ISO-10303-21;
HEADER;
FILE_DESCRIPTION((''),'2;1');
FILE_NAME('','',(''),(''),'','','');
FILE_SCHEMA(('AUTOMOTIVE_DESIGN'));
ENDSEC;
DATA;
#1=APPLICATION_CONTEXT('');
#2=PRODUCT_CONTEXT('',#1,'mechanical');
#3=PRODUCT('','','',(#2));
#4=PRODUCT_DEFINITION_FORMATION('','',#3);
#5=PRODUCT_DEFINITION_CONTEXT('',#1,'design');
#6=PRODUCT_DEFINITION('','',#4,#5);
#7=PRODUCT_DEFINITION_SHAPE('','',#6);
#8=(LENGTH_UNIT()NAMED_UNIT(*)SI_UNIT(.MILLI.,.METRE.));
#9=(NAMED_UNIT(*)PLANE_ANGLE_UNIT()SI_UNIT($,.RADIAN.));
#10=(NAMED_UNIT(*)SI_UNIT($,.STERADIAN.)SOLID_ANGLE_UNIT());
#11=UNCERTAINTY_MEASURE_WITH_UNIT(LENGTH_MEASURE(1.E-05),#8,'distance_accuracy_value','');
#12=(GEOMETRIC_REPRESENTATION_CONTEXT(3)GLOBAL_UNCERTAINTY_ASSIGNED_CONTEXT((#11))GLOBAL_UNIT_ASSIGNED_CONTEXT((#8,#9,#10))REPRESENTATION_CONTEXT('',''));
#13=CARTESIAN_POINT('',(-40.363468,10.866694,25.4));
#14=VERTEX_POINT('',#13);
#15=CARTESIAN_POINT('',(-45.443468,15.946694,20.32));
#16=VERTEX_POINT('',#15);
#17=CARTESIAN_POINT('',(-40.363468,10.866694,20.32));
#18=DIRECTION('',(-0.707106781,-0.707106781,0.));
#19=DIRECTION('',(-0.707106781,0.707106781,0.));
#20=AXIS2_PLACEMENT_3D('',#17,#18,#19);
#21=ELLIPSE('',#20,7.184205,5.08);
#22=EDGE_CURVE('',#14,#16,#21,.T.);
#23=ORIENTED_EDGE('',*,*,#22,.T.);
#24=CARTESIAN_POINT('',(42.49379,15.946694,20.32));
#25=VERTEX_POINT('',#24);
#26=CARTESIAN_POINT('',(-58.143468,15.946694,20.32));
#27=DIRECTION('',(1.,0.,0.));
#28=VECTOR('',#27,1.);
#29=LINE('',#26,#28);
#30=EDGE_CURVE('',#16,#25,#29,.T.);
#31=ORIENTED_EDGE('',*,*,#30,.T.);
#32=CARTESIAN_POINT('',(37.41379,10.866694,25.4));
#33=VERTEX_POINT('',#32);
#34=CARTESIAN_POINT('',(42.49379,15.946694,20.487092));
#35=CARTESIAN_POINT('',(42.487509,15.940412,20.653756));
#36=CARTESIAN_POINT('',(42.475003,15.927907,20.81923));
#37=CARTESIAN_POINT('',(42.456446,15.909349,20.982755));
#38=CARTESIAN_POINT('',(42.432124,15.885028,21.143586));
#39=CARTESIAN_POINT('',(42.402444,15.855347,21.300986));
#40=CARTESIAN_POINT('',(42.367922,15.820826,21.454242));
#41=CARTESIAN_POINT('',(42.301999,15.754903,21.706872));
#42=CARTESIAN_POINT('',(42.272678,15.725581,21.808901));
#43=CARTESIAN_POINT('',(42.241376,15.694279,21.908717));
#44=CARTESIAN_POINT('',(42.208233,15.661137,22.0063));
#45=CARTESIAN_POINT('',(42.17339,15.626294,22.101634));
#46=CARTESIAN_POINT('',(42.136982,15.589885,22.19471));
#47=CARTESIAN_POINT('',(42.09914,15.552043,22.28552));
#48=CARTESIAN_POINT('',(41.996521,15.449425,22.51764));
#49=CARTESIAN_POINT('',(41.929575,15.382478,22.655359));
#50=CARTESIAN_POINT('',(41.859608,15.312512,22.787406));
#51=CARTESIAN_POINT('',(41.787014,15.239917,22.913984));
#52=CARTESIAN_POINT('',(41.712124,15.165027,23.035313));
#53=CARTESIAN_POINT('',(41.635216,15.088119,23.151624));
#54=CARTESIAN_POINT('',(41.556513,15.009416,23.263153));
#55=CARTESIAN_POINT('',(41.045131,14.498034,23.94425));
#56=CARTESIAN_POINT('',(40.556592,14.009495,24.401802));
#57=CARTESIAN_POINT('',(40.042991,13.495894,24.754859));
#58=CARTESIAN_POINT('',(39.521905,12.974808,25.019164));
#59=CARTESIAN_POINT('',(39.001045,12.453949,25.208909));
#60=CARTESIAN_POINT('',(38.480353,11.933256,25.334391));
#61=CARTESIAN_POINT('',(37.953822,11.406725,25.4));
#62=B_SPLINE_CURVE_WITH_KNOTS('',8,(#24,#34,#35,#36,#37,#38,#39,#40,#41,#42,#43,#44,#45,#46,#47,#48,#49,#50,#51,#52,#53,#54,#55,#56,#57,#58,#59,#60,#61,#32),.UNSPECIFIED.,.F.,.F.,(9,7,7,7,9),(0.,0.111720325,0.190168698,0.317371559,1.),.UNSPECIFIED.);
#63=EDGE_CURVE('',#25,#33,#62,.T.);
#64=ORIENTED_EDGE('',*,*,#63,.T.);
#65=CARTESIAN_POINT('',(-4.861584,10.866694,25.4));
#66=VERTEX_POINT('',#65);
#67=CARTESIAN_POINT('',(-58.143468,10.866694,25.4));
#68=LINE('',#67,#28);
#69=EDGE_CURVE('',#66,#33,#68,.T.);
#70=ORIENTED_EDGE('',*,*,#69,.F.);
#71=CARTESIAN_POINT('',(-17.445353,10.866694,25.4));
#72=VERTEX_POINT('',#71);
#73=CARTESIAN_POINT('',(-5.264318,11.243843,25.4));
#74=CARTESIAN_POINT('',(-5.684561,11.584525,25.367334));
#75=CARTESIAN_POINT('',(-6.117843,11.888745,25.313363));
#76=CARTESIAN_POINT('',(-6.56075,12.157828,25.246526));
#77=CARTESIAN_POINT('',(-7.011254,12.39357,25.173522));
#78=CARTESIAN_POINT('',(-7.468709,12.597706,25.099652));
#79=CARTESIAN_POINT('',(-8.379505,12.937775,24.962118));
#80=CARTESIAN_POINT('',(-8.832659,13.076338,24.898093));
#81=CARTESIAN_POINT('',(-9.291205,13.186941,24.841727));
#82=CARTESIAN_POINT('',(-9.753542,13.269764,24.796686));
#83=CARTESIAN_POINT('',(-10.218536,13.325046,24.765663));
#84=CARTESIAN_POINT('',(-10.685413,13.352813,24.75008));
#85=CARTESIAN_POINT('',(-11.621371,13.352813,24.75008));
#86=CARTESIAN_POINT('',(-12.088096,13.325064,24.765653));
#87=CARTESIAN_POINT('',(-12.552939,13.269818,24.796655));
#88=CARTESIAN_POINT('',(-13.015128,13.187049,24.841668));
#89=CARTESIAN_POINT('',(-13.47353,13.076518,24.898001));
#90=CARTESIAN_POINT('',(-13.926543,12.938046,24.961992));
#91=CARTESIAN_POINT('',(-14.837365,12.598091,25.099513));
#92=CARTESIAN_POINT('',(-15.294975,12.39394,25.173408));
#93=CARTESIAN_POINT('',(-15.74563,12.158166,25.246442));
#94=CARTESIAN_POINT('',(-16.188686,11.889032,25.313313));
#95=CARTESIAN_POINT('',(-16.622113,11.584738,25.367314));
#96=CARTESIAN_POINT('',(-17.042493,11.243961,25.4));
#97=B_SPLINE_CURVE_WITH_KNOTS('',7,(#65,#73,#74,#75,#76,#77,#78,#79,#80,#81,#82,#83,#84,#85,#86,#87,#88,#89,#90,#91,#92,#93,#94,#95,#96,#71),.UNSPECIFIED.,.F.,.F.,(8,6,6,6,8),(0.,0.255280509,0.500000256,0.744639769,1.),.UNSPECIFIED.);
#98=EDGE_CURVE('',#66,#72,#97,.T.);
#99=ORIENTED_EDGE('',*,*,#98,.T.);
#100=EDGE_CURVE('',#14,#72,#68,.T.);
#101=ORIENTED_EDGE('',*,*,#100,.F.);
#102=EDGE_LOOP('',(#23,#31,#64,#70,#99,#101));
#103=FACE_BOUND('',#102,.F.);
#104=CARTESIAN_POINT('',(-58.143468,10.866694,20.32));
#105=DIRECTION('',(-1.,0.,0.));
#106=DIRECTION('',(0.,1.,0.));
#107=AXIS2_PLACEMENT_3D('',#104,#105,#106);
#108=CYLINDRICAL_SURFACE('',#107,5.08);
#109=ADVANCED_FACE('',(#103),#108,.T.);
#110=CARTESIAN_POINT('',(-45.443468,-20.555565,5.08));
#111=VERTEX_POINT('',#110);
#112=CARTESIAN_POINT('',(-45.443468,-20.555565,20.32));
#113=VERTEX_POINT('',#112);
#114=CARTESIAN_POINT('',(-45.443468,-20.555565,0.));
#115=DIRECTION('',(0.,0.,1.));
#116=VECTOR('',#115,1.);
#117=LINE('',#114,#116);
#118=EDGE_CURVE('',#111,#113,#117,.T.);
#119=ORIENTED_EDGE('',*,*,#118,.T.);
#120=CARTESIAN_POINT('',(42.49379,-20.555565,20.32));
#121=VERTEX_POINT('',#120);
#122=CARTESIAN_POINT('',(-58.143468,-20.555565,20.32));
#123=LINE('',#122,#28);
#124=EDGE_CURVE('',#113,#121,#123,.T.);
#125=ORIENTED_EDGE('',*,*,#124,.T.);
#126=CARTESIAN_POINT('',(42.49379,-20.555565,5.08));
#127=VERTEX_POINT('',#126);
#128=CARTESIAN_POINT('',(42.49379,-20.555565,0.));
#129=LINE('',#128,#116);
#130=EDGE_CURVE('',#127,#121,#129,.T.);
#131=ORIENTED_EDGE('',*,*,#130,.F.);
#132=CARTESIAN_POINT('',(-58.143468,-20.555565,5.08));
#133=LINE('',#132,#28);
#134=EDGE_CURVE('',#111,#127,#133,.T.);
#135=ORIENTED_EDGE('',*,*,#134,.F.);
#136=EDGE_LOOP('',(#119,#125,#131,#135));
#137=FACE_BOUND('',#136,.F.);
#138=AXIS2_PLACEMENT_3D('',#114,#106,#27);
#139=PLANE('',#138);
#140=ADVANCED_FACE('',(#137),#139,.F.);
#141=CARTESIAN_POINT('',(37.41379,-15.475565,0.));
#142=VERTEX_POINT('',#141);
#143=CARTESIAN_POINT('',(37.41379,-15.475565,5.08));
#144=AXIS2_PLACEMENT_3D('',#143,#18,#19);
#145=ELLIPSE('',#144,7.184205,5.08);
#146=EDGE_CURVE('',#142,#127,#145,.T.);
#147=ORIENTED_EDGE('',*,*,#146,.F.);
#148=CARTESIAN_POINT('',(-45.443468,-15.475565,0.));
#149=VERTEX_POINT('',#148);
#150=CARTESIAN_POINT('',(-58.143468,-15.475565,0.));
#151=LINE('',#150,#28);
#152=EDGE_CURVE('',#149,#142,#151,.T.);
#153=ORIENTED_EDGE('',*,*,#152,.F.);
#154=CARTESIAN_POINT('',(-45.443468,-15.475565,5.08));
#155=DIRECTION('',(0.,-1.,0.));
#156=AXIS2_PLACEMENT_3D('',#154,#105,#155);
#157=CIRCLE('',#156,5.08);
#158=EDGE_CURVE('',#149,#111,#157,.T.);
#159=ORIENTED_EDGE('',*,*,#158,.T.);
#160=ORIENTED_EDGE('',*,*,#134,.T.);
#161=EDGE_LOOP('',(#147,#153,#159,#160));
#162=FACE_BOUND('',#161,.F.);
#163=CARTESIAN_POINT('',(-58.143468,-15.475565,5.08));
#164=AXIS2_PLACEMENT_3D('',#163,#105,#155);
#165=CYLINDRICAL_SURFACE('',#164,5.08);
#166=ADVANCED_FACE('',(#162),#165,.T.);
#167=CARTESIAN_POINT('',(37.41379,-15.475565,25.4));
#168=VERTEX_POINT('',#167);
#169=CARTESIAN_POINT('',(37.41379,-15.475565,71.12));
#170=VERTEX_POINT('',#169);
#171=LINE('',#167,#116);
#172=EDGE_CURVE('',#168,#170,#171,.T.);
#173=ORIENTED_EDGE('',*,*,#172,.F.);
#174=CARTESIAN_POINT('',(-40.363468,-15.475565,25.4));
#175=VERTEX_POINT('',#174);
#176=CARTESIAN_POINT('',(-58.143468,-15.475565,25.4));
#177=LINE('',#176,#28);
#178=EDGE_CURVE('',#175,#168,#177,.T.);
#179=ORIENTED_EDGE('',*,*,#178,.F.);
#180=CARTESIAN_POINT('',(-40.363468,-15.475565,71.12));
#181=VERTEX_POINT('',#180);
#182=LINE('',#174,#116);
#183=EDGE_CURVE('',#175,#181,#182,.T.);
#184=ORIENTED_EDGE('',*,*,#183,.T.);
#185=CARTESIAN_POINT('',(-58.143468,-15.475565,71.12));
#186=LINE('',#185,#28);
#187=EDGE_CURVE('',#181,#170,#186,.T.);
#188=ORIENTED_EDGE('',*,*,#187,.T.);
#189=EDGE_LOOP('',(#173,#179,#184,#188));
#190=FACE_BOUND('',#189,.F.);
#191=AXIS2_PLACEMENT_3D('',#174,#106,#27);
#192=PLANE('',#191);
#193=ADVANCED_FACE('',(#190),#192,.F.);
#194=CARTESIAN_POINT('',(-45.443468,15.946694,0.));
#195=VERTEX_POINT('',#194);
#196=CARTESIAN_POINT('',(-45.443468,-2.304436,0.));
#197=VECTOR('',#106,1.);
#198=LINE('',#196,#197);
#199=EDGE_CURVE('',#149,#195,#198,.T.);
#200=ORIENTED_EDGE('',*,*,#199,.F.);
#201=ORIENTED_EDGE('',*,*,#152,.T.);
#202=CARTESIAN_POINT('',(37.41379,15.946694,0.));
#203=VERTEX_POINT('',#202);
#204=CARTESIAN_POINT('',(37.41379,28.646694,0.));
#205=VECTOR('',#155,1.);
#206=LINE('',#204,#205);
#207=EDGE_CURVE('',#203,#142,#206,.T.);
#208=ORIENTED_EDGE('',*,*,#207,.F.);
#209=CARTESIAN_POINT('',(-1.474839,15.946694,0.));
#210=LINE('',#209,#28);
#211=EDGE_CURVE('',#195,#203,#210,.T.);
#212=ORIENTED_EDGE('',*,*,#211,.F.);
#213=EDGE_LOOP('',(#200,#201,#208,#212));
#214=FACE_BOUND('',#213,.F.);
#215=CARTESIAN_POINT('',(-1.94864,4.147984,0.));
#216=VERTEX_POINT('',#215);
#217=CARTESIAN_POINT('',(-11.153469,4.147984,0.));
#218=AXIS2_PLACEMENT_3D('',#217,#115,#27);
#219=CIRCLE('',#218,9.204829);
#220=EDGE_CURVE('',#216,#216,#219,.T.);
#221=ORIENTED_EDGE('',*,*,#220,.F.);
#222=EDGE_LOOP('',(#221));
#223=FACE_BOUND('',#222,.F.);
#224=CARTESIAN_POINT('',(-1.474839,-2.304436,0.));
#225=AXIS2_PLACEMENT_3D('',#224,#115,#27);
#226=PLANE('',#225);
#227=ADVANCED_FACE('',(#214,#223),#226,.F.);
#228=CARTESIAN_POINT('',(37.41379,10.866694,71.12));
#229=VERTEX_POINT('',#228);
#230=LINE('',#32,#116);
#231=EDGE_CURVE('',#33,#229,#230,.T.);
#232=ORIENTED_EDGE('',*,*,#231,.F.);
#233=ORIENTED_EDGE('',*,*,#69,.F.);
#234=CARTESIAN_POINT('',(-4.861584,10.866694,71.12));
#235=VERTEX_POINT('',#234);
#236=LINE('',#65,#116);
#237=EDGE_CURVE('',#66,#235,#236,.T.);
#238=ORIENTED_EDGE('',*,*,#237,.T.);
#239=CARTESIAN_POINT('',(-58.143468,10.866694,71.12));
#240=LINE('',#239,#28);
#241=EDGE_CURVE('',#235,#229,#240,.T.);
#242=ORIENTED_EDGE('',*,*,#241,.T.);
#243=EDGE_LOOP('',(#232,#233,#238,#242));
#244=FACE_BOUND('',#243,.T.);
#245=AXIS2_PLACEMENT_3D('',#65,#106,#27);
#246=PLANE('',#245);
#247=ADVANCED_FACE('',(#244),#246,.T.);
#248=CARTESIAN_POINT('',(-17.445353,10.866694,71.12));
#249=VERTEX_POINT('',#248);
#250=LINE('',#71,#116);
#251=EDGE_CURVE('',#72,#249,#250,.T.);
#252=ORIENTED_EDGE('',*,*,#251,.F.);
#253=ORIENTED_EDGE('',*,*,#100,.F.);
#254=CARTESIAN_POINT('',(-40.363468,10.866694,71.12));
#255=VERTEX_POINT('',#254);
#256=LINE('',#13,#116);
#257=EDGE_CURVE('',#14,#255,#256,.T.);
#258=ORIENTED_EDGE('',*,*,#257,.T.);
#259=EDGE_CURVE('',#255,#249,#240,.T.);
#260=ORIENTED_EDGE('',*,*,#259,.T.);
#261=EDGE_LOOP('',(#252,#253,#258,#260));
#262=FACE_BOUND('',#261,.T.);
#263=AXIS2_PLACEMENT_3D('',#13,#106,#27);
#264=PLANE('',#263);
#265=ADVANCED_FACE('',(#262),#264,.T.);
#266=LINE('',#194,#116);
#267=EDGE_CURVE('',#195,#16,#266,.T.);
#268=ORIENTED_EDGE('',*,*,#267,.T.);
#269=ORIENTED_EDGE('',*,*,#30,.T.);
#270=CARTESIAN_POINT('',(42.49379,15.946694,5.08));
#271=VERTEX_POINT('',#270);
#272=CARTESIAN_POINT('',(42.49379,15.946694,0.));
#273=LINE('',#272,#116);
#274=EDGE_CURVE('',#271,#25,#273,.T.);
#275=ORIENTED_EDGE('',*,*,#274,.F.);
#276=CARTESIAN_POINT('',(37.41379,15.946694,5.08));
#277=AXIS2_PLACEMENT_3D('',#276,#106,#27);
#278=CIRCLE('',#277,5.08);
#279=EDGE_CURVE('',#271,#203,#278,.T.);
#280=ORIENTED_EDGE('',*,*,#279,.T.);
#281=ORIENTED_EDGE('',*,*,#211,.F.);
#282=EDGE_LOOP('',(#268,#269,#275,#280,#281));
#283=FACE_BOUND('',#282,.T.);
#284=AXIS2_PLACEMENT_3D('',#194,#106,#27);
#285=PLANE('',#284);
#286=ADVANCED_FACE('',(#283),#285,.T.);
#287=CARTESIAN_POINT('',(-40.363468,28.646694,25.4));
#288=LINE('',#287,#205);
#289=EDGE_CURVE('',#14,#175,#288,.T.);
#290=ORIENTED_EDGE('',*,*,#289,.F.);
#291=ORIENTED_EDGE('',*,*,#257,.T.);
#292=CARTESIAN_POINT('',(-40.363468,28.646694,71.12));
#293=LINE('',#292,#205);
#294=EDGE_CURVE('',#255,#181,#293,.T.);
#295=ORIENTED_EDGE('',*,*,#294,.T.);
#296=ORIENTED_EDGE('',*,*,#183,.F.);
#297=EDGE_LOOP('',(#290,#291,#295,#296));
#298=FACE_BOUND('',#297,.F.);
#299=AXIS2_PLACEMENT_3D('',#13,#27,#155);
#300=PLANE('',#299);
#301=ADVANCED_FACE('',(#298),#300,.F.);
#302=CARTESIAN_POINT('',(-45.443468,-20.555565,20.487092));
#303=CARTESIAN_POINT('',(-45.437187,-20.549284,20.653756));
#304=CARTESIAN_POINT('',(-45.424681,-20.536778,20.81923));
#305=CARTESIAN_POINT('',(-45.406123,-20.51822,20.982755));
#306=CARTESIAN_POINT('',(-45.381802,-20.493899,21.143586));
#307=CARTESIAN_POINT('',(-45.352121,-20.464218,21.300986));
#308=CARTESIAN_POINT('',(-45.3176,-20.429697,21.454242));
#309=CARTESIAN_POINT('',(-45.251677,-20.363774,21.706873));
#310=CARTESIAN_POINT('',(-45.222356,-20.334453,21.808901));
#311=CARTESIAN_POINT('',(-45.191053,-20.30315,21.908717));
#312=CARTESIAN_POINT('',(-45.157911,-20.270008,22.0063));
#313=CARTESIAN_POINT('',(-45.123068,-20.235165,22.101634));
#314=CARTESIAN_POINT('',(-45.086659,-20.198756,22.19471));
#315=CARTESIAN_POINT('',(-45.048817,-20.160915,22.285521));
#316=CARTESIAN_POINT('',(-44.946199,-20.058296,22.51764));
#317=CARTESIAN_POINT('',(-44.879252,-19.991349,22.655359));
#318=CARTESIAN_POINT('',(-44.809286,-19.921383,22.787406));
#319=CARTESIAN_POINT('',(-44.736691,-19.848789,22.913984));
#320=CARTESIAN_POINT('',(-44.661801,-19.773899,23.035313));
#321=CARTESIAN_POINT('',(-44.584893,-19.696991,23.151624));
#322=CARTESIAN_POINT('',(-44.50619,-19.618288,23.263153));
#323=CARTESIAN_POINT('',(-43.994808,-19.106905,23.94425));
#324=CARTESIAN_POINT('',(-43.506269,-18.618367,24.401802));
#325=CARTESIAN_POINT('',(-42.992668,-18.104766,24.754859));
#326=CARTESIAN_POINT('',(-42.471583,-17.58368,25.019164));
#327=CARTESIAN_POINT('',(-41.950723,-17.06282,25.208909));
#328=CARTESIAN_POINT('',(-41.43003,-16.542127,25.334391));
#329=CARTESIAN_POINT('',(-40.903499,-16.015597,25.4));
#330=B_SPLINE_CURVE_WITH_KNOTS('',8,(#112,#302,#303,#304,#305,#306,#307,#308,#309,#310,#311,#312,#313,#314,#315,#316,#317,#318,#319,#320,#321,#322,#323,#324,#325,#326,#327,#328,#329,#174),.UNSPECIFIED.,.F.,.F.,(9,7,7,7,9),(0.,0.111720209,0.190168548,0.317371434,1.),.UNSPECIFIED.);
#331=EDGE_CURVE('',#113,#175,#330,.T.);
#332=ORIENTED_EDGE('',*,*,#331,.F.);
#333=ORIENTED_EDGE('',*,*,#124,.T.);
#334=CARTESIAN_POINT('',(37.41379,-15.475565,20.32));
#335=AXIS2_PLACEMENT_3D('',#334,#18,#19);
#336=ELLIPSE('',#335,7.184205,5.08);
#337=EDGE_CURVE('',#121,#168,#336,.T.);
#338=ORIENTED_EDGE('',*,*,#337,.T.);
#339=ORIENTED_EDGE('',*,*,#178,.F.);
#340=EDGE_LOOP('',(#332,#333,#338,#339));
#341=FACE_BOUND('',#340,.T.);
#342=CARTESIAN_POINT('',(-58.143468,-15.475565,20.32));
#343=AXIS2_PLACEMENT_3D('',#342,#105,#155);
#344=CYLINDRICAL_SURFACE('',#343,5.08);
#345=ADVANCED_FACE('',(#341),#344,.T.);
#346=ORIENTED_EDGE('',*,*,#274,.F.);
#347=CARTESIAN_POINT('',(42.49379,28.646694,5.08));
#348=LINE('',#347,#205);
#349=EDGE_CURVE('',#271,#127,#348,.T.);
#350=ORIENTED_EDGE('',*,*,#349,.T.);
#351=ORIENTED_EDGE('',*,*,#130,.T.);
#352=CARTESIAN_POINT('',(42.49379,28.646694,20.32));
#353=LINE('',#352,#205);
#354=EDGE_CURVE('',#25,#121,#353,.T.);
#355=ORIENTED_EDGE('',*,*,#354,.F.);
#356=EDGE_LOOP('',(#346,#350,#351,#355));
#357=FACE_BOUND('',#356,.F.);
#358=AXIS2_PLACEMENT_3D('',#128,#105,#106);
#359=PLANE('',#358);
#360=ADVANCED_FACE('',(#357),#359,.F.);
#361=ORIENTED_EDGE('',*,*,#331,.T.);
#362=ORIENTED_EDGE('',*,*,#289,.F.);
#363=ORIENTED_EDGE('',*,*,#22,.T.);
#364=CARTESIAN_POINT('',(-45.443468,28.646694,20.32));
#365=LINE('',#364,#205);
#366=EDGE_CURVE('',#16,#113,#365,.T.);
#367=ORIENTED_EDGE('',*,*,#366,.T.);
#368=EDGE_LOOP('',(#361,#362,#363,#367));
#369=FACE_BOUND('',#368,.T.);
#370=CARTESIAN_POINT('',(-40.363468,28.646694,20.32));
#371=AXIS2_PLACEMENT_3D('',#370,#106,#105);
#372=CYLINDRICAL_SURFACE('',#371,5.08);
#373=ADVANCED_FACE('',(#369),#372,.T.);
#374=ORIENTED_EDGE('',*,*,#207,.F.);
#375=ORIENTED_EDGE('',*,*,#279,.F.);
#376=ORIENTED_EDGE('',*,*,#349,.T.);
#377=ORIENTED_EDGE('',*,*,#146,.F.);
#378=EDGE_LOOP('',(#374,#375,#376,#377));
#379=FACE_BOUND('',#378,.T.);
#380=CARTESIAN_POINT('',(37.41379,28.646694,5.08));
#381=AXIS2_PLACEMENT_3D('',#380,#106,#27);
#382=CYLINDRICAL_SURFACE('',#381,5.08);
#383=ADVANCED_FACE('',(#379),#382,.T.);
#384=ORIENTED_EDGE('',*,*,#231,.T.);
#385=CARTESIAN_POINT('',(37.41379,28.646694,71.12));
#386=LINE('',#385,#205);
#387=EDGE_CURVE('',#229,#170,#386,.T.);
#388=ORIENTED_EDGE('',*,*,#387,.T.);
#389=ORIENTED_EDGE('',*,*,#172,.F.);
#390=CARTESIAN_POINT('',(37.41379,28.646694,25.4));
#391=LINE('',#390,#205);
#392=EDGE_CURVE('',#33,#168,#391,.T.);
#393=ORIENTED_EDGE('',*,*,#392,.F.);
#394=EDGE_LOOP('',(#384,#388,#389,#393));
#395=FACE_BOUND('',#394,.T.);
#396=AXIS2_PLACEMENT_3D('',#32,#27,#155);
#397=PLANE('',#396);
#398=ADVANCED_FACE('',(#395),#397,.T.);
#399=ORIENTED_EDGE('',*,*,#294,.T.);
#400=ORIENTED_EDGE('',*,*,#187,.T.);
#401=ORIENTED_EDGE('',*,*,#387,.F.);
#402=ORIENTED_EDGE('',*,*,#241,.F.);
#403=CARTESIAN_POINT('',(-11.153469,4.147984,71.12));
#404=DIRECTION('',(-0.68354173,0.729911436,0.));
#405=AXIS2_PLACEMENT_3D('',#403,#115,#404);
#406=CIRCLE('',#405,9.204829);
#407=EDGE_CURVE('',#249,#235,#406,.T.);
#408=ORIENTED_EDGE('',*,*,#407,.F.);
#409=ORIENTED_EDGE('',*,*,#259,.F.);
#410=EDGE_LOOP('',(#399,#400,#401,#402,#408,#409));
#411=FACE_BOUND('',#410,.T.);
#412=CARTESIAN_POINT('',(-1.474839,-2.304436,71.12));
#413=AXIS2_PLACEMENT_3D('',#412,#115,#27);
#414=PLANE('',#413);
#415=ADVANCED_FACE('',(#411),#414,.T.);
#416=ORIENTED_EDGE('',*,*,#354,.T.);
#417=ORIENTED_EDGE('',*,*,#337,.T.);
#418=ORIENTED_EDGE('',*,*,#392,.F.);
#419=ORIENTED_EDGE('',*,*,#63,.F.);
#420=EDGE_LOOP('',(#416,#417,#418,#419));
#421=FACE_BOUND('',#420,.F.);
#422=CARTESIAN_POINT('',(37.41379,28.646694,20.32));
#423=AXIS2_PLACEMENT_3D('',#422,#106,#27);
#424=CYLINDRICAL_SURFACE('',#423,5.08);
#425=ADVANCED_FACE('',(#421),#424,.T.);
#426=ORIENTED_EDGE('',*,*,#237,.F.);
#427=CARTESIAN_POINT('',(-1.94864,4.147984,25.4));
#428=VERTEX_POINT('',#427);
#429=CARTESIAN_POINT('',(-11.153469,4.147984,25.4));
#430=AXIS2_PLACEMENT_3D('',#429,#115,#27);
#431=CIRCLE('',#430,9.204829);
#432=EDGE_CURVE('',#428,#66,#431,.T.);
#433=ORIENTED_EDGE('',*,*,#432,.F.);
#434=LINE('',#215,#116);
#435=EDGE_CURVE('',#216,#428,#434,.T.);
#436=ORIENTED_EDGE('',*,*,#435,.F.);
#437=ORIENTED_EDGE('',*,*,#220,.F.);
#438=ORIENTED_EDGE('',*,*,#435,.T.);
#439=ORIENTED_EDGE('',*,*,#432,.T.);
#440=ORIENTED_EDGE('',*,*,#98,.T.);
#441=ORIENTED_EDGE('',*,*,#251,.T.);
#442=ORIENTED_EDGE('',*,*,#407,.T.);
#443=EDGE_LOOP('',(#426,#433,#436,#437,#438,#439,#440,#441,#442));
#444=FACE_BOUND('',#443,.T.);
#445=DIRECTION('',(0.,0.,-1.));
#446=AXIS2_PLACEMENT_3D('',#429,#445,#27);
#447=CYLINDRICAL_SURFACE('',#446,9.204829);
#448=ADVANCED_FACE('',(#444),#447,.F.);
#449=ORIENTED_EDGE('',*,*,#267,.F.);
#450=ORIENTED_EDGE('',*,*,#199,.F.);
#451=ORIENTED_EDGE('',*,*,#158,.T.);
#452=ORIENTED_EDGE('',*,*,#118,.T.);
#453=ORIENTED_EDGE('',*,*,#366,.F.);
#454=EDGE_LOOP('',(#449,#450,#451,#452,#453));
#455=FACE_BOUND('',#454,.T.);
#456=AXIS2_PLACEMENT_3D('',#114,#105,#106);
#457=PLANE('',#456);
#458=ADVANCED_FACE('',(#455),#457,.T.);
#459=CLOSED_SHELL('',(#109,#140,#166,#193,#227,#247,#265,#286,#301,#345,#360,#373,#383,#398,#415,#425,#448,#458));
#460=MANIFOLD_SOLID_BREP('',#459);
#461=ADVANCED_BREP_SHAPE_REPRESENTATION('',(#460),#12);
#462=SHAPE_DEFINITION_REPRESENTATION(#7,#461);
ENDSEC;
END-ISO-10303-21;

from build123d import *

# Parameters (mm, degrees)
F0_W        = 87.937258184
F0_H        = 36.5022588521
F0_R        = 9.2048285636
F1_DEPTH    = 25.4
F2_T1_DEPTH = 113.337258184
F2_T3_DEPTH = 61.9022588521
F3_DEPTH    = 45.72


# Not quite as in the source:
# - a fillet or chamfer that OpenCascade refuses, or shapes differently, is made with other operations: its cross-section is extruded or revolved along the edge and cut away or added


with BuildPart() as f1:
    # F0 (on Top) → F1 (new body)
    with BuildSketch(Plane.XY):
        with Locations((-1.4748387039, -2.3044357076)):
            Rectangle(F0_W, F0_H)
        with Locations((-11.1534688622, 4.1479840875)):
            Circle(F0_R, mode=Mode.SUBTRACT)
    extrude(amount=F1_DEPTH)

    # F2: fillet of radius 5.08 on 6 edges, made by hand

    # F2_s2 → F2_t1 (cut)
    with BuildSketch(Plane.YZ.offset(-58.1434677958)):
        with BuildLine():
            ThreePointArc((-20.5555651337, 20.32), (-19.0676675821, 23.9121024484), (-15.4755651337, 25.4))
            Line((-15.4755651337, 25.4), (-20.5555651337, 25.4))
            Line((-20.5555651337, 25.4), (-20.5555651337, 20.32))
        make_face()
        with BuildLine():
            ThreePointArc((15.9466937184, 20.32), (14.4587961669, 23.9121024484), (10.8666937184, 25.4))
            Line((10.8666937184, 25.4), (15.9466937184, 25.4))
            Line((15.9466937184, 25.4), (15.9466937184, 20.32))
        make_face()
        with BuildLine():
            ThreePointArc((-20.5555651337, 5.08), (-19.0676675821, 1.4878975516), (-15.4755651337, 0))
            Line((-15.4755651337, 0), (-20.5555651337, 0))
            Line((-20.5555651337, 0), (-20.5555651337, 5.08))
        make_face()
    extrude(amount=F2_T1_DEPTH, mode=Mode.SUBTRACT)

    # F2_s4 → F2_t3 (cut)
    with BuildSketch(Plane.XZ.offset(-28.6466937184)):
        with BuildLine():
            ThreePointArc((-45.4434677958, 20.32), (-43.9555702443, 23.9121024484), (-40.3634677958, 25.4))
            Line((-40.3634677958, 25.4), (-45.4434677958, 25.4))
            Line((-45.4434677958, 25.4), (-45.4434677958, 20.32))
        make_face()
        with BuildLine():
            ThreePointArc((42.4937903881, 20.32), (41.0058928365, 23.9121024484), (37.4137903881, 25.4))
            Line((37.4137903881, 25.4), (42.4937903881, 25.4))
            Line((42.4937903881, 25.4), (42.4937903881, 20.32))
        make_face()
        with BuildLine():
            ThreePointArc((42.4937903881, 5.08), (41.0058928365, 1.4878975516), (37.4137903881, 0))
            Line((37.4137903881, 0), (42.4937903881, 0))
            Line((42.4937903881, 0), (42.4937903881, 5.08))
        make_face()
    extrude(amount=F2_T3_DEPTH, mode=Mode.SUBTRACT)

    # F3 (add): a face of the model
    f3_faces = [f1.faces().sort_by_distance(p)[0] for p in [
        (-0.1621567776, -3.0875160288, 25.4),
    ]]
    extrude(f3_faces, amount=F3_DEPTH)


solid = f1.part
